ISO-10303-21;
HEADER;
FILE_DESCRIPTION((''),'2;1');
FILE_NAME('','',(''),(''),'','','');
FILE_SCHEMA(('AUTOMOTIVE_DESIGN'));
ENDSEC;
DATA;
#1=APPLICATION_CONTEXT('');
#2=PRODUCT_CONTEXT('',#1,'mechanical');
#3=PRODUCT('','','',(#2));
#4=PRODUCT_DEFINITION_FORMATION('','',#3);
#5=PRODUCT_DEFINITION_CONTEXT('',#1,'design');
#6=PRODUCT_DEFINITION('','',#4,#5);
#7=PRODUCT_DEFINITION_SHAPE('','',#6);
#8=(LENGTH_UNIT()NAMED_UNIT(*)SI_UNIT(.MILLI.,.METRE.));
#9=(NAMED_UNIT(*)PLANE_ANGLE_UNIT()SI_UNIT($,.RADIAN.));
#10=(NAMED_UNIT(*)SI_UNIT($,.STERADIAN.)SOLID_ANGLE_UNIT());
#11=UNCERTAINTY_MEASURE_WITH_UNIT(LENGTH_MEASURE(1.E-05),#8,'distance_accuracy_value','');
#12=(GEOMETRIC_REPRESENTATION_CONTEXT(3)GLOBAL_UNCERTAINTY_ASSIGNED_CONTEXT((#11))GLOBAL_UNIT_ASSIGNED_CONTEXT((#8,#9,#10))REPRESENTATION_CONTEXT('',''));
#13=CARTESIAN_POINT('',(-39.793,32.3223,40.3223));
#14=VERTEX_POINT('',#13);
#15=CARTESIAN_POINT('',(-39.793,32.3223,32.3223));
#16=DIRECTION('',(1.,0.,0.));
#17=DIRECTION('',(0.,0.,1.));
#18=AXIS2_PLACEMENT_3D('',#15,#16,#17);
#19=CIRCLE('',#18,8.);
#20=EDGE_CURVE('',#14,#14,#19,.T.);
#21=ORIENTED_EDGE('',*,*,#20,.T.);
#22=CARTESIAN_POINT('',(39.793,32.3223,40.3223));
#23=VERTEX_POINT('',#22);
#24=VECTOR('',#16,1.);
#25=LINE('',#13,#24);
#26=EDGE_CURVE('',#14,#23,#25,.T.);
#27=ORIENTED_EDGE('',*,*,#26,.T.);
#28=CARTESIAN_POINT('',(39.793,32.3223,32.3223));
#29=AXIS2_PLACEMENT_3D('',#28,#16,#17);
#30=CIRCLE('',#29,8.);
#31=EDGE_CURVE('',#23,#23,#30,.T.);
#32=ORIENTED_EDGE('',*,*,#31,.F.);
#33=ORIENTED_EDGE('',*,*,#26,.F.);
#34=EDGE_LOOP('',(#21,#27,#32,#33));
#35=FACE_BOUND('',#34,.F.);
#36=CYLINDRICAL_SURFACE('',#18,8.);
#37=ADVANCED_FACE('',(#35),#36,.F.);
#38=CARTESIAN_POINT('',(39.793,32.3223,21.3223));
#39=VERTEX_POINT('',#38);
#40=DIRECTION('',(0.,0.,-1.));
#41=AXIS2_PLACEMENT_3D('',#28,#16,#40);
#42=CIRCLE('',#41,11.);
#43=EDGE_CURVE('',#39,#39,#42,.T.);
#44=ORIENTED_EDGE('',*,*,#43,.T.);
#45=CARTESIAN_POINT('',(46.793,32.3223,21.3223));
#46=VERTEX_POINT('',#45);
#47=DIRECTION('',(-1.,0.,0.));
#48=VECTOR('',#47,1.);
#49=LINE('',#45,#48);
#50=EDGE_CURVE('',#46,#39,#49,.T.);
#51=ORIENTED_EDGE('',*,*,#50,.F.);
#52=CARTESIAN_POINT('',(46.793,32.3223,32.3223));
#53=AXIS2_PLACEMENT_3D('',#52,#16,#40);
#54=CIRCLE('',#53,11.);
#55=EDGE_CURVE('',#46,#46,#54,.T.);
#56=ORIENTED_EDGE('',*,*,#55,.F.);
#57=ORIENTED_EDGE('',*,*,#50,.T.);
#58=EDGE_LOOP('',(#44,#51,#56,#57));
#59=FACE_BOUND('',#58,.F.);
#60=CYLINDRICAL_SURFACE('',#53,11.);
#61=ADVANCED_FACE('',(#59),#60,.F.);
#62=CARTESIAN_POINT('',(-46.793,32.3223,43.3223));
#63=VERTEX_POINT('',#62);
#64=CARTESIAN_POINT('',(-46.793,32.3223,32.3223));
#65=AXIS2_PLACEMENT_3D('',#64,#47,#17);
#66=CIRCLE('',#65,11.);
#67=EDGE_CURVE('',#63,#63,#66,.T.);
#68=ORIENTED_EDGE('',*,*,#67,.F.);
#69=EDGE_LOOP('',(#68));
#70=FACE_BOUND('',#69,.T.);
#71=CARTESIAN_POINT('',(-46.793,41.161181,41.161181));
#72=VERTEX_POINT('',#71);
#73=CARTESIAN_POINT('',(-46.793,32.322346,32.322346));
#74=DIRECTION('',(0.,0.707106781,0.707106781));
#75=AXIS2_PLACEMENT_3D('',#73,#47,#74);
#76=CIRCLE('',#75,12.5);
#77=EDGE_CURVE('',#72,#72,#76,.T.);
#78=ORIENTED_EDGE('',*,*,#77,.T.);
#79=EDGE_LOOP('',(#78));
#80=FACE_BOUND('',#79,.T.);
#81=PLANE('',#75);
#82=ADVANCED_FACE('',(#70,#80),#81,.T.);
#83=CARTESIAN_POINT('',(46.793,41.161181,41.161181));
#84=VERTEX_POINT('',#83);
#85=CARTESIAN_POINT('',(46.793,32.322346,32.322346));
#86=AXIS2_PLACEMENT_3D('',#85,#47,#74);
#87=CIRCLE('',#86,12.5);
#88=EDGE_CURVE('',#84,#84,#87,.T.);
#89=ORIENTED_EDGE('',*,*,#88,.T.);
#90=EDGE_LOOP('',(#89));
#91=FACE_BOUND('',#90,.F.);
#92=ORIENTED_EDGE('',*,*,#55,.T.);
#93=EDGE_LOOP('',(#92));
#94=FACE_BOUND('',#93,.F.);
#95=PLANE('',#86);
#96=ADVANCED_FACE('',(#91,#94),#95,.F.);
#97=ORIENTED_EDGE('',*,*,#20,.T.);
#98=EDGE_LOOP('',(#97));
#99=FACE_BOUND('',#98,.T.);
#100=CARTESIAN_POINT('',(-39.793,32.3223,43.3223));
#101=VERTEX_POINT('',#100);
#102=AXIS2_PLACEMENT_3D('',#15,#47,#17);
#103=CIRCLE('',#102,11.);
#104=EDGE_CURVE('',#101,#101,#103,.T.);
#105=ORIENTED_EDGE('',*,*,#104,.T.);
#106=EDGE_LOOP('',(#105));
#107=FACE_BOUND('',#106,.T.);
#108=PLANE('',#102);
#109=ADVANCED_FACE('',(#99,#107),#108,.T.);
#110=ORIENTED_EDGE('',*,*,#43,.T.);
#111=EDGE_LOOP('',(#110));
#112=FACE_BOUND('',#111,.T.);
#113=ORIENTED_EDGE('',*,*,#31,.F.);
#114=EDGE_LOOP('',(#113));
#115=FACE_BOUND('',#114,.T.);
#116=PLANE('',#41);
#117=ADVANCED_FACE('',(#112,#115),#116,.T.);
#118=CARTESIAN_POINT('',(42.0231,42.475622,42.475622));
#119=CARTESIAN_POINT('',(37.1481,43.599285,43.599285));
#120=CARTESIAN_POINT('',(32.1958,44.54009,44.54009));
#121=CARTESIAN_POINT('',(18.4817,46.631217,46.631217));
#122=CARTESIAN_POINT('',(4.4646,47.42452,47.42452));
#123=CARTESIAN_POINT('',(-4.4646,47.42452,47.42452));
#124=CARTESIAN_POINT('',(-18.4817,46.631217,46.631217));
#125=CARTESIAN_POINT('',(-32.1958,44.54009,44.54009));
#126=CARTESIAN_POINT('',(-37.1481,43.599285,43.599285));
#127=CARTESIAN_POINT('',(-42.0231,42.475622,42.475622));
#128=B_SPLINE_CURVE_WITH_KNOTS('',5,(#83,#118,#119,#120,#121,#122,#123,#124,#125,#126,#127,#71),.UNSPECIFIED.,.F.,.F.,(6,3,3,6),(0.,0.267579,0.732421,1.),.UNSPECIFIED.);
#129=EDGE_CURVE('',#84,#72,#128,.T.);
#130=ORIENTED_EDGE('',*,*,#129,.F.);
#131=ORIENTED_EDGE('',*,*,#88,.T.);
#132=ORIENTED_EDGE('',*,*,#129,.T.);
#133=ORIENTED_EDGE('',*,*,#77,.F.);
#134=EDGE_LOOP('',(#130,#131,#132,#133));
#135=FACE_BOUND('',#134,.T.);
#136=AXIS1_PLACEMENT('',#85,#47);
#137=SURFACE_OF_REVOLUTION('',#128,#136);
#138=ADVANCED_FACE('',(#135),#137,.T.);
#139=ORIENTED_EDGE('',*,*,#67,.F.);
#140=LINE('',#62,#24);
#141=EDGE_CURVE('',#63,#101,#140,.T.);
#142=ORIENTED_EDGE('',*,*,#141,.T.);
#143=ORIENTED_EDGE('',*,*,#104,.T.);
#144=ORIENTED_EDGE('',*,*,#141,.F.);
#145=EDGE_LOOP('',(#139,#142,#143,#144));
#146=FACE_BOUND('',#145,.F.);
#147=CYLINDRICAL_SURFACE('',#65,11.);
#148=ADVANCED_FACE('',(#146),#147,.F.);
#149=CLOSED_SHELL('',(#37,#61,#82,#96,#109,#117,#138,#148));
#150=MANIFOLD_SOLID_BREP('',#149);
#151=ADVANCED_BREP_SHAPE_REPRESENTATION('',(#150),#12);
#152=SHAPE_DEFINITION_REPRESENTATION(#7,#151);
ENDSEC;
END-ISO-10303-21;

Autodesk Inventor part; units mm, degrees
ref_plane "YZ Plane" through (0, 0, 0) normal (1, 0, 0) x (0, 1, 0)
ref_plane "XZ Plane" through (0, 0, 0) normal (0, 1, 0) x (-1, 0, 0)
sketch "Sketch1" plane through (0, 0, 0) normal (0, 0, 1) x (1, 0, 0)
  circle A0 centre (0, 0) radius 100 construction
  circle A1 centre (0, 0) radius 75 construction
  circle A2 centre (0, 75) radius 25 construction
  circle A3 centre (0, 0) radius 89 construction
  dimension "d1" = 150
  dimension "d0" = 200
  dimension "d3" = 50
  dimension "d4" = 14
ref_plane "Work Plane1" through (0, 0, 0) normal (0, -0.7071068, 0.7071068) x (1, 0, 0)
sketch "Sketch2" plane through (0, 0, 0) normal (0, -0.7071068, 0.7071068) x (1, 0, 0)
  ellipse E0 centre (0, 0) end of major axis (100, 0) minor radius 70.7107 construction
  circle A0 centre (0, 45.7107) radius 25 construction
  circle A1 centre (0, 45.7107) radius 22 construction
  circle A2 centre (0, 45.7107) radius 12.5 construction
  line L0 (0, 58.2107) -> (46.793, 58.2107) construction
  line L1 (46.793, 45.7107) -> (-46.793, 45.7107)
  line L2 (0, 45.7107) -> (0, 58.2107) construction
  line L3 (0, 58.2107) -> (-46.793, 58.2107) construction
  ellipse E1 centre (0, 0) end of major axis (-96.8498, 0) minor radius 67.7107 (49.4713, 58.2107) -> (-49.4713, 58.2107) ccw construction
  line L4 (-46.793, 58.2107) -> (-46.793, 45.7107)
  line L5 (46.793, 58.2107) -> (46.793, 45.7107)
  circle A3 centre (0, 45.7107) radius 21 construction
  spline S0 degree 5 poles (103, 0) (102.9997, 6.0067) (102.15, 12.0166) (100.4439, 17.8567) (95.335, 29.4916) (87.5543, 39.5637) (82.9111, 44.3403) (72.1684, 53.435) (59.9286, 60.4121) (53.1788, 63.5338) (38.7726, 68.8984) (23.7279, 72.0795) (15.8518, 73.167) (0.0001, 74.2544) (-15.8515, 73.167) (-23.7275, 72.0796) (-38.7724, 68.8985) (-53.1787, 63.534) (-59.9287, 60.4119) (-72.1688, 53.435) (-82.9115, 44.3398) (-87.5547, 39.5637) (-95.3351, 29.4907) (-100.4441, 17.8572) (-102.1497, 12.015) (-103.8502, 0) (-102.1497, -12.015) (-100.4441, -17.8572) (-95.3351, -29.4907) (-87.5547, -39.5637) (-82.9115, -44.3398) (-72.1688, -53.435) (-59.9287, -60.4119) (-53.1787, -63.534) (-38.7724, -68.8985) (-23.7275, -72.0796) (-15.8515, -73.167) (0.0001, -74.2544) (15.8518, -73.167) (23.7279, -72.0795) (38.7726, -68.8984) (53.1788, -63.5338) (59.9286, -60.4121) (72.1684, -53.435) (82.9111, -44.3403) (87.5543, -39.5637) (95.335, -29.4916) (100.4439, -17.8567) (102.15, -12.0166) (102.9997, -6.0067) (103, 0) knots 0 0 0 0 0 0 0.053721 0.053721 0.053721 0.112881 0.112881 0.112881 0.179119 0.179119 0.179119 0.25 0.25 0.25 0.320879 0.320879 0.320879 0.38712 0.38712 0.38712 0.44628 0.44628 0.44628 0.5 0.5 0.5 0.55372 0.55372 0.55372 0.61288 0.61288 0.61288 0.679121 0.679121 0.679121 0.75 0.75 0.75 0.820881 0.820881 0.820881 0.887119 0.887119 0.887119 0.946279 0.946279 0.946279 1 1 1 1 1 1 construction
  spline S1 degree 5 poles (125, 0) (124.9996, 8.8962) (123.6824, 17.7961) (121.0383, 26.425) (113.3824, 42.8537) (101.833, 56.8343) (95.2127, 63.1614) (80.4494, 74.6213) (63.7738, 83.0792) (54.8985, 86.6443) (36.372, 92.4116) (17.1764, 95.263) (7.3437, 95.9828) (-12.2502, 95.9826) (-31.6302, 93.1025) (-41.1422, 90.9507) (-59.3601, 85.2856) (-76.3656, 76.6479) (-84.2872, 71.6905) (-98.7984, 60.4396) (-110.4889, 46.2955) (-115.3769, 38.6773) (-122.9533, 22.3258) (-125.6666, 4.5154) (-125.6666, -4.5154) (-122.9533, -22.3258) (-115.3769, -38.6773) (-110.4889, -46.2955) (-98.7984, -60.4396) (-84.2872, -71.6905) (-76.3656, -76.6479) (-59.3601, -85.2856) (-41.1422, -90.9507) (-31.6302, -93.1025) (-12.2502, -95.9826) (7.3437, -95.9828) (17.1764, -95.263) (36.372, -92.4116) (54.8985, -86.6443) (63.7738, -83.0792) (80.4494, -74.6213) (95.2127, -63.1614) (101.833, -56.8343) (113.3824, -42.8537) (121.0383, -26.425) (123.6824, -17.7961) (124.9996, -8.8962) (125, 0) knots 0 0 0 0 0 0 0.063791 0.063791 0.063791 0.128941 0.128941 0.128941 0.197218 0.197218 0.197218 0.267663 0.267663 0.267663 0.337325 0.337325 0.337325 0.403955 0.403955 0.403955 0.468142 0.468142 0.468142 0.531858 0.531858 0.531858 0.596045 0.596045 0.596045 0.662675 0.662675 0.662675 0.732337 0.732337 0.732337 0.802782 0.802782 0.802782 0.871059 0.871059 0.871059 0.936209 0.936209 0.936209 1 1 1 1 1 1 construction
  spline S2 degree 5 poles (46.793, 58.2107) (42.0231, 60.0696) (37.1481, 61.6587) (32.1958, 62.9892) (18.4817, 65.9465) (4.4646, 67.0684) (-4.4646, 67.0684) (-18.4817, 65.9465) (-32.1958, 62.9892) (-37.1481, 61.6587) (-42.0231, 60.0696) (-46.793, 58.2107) knots 0 0 0 0 0 0 0.267579 0.267579 0.267579 0.732421 0.732421 0.732421 1 1 1 1 1 1
  point P0 (0, 53.033)
  point P1 (0, 53.033)
  dimension "d17" = 3
  dimension "d28" = 25
  dimension "d25" = 50
  dimension "d27" = 3
  dimension "d29" = 9.5
  dimension "d50" = 46.793
  dimension "d51" = 46.793
  dimension "d52" = 1
revolve "Revolution1" add sketch "Sketch2" angle 360 about axis through (46.793, 32.3223, 32.3223) along (-1, 0, 0)
sketch "Sketch5" plane through (-46.793, 32.3223, 32.3223) normal (-1, 0, 0) x (0, 0, 1)
  circle A0 centre (0, 0) radius 12.5 projected
  circle A1 centre (0, 0) radius 11
  point P0 (-32.3223, -32.3223)
  point P1 (8.8388, 8.8388)
  dimension "d53" = 22
extrude "Extrusion3" cut sketch "Sketch5" against normal blind 7 contours A1
sketch "Sketch6" plane through (46.793, 32.3223, 32.3223) normal (1, 0, 0) x (0, 0, -1)
  circle A0 centre (0, 0) radius 12.5 projected
  circle A1 centre (0, 0) radius 11
  point P0 (32.3223, -32.3223)
  point P1 (-8.8388, 8.8388)
  dimension "d56" = 22
extrude "Extrusion4" cut sketch "Sketch6" against normal blind 7 contours A1
hole "Hole2" at (-39.793, 32.3223, 32.3223) direction (1, 0, 0) diameter 16 end up to surface
properties part number "Roller 48mm"
